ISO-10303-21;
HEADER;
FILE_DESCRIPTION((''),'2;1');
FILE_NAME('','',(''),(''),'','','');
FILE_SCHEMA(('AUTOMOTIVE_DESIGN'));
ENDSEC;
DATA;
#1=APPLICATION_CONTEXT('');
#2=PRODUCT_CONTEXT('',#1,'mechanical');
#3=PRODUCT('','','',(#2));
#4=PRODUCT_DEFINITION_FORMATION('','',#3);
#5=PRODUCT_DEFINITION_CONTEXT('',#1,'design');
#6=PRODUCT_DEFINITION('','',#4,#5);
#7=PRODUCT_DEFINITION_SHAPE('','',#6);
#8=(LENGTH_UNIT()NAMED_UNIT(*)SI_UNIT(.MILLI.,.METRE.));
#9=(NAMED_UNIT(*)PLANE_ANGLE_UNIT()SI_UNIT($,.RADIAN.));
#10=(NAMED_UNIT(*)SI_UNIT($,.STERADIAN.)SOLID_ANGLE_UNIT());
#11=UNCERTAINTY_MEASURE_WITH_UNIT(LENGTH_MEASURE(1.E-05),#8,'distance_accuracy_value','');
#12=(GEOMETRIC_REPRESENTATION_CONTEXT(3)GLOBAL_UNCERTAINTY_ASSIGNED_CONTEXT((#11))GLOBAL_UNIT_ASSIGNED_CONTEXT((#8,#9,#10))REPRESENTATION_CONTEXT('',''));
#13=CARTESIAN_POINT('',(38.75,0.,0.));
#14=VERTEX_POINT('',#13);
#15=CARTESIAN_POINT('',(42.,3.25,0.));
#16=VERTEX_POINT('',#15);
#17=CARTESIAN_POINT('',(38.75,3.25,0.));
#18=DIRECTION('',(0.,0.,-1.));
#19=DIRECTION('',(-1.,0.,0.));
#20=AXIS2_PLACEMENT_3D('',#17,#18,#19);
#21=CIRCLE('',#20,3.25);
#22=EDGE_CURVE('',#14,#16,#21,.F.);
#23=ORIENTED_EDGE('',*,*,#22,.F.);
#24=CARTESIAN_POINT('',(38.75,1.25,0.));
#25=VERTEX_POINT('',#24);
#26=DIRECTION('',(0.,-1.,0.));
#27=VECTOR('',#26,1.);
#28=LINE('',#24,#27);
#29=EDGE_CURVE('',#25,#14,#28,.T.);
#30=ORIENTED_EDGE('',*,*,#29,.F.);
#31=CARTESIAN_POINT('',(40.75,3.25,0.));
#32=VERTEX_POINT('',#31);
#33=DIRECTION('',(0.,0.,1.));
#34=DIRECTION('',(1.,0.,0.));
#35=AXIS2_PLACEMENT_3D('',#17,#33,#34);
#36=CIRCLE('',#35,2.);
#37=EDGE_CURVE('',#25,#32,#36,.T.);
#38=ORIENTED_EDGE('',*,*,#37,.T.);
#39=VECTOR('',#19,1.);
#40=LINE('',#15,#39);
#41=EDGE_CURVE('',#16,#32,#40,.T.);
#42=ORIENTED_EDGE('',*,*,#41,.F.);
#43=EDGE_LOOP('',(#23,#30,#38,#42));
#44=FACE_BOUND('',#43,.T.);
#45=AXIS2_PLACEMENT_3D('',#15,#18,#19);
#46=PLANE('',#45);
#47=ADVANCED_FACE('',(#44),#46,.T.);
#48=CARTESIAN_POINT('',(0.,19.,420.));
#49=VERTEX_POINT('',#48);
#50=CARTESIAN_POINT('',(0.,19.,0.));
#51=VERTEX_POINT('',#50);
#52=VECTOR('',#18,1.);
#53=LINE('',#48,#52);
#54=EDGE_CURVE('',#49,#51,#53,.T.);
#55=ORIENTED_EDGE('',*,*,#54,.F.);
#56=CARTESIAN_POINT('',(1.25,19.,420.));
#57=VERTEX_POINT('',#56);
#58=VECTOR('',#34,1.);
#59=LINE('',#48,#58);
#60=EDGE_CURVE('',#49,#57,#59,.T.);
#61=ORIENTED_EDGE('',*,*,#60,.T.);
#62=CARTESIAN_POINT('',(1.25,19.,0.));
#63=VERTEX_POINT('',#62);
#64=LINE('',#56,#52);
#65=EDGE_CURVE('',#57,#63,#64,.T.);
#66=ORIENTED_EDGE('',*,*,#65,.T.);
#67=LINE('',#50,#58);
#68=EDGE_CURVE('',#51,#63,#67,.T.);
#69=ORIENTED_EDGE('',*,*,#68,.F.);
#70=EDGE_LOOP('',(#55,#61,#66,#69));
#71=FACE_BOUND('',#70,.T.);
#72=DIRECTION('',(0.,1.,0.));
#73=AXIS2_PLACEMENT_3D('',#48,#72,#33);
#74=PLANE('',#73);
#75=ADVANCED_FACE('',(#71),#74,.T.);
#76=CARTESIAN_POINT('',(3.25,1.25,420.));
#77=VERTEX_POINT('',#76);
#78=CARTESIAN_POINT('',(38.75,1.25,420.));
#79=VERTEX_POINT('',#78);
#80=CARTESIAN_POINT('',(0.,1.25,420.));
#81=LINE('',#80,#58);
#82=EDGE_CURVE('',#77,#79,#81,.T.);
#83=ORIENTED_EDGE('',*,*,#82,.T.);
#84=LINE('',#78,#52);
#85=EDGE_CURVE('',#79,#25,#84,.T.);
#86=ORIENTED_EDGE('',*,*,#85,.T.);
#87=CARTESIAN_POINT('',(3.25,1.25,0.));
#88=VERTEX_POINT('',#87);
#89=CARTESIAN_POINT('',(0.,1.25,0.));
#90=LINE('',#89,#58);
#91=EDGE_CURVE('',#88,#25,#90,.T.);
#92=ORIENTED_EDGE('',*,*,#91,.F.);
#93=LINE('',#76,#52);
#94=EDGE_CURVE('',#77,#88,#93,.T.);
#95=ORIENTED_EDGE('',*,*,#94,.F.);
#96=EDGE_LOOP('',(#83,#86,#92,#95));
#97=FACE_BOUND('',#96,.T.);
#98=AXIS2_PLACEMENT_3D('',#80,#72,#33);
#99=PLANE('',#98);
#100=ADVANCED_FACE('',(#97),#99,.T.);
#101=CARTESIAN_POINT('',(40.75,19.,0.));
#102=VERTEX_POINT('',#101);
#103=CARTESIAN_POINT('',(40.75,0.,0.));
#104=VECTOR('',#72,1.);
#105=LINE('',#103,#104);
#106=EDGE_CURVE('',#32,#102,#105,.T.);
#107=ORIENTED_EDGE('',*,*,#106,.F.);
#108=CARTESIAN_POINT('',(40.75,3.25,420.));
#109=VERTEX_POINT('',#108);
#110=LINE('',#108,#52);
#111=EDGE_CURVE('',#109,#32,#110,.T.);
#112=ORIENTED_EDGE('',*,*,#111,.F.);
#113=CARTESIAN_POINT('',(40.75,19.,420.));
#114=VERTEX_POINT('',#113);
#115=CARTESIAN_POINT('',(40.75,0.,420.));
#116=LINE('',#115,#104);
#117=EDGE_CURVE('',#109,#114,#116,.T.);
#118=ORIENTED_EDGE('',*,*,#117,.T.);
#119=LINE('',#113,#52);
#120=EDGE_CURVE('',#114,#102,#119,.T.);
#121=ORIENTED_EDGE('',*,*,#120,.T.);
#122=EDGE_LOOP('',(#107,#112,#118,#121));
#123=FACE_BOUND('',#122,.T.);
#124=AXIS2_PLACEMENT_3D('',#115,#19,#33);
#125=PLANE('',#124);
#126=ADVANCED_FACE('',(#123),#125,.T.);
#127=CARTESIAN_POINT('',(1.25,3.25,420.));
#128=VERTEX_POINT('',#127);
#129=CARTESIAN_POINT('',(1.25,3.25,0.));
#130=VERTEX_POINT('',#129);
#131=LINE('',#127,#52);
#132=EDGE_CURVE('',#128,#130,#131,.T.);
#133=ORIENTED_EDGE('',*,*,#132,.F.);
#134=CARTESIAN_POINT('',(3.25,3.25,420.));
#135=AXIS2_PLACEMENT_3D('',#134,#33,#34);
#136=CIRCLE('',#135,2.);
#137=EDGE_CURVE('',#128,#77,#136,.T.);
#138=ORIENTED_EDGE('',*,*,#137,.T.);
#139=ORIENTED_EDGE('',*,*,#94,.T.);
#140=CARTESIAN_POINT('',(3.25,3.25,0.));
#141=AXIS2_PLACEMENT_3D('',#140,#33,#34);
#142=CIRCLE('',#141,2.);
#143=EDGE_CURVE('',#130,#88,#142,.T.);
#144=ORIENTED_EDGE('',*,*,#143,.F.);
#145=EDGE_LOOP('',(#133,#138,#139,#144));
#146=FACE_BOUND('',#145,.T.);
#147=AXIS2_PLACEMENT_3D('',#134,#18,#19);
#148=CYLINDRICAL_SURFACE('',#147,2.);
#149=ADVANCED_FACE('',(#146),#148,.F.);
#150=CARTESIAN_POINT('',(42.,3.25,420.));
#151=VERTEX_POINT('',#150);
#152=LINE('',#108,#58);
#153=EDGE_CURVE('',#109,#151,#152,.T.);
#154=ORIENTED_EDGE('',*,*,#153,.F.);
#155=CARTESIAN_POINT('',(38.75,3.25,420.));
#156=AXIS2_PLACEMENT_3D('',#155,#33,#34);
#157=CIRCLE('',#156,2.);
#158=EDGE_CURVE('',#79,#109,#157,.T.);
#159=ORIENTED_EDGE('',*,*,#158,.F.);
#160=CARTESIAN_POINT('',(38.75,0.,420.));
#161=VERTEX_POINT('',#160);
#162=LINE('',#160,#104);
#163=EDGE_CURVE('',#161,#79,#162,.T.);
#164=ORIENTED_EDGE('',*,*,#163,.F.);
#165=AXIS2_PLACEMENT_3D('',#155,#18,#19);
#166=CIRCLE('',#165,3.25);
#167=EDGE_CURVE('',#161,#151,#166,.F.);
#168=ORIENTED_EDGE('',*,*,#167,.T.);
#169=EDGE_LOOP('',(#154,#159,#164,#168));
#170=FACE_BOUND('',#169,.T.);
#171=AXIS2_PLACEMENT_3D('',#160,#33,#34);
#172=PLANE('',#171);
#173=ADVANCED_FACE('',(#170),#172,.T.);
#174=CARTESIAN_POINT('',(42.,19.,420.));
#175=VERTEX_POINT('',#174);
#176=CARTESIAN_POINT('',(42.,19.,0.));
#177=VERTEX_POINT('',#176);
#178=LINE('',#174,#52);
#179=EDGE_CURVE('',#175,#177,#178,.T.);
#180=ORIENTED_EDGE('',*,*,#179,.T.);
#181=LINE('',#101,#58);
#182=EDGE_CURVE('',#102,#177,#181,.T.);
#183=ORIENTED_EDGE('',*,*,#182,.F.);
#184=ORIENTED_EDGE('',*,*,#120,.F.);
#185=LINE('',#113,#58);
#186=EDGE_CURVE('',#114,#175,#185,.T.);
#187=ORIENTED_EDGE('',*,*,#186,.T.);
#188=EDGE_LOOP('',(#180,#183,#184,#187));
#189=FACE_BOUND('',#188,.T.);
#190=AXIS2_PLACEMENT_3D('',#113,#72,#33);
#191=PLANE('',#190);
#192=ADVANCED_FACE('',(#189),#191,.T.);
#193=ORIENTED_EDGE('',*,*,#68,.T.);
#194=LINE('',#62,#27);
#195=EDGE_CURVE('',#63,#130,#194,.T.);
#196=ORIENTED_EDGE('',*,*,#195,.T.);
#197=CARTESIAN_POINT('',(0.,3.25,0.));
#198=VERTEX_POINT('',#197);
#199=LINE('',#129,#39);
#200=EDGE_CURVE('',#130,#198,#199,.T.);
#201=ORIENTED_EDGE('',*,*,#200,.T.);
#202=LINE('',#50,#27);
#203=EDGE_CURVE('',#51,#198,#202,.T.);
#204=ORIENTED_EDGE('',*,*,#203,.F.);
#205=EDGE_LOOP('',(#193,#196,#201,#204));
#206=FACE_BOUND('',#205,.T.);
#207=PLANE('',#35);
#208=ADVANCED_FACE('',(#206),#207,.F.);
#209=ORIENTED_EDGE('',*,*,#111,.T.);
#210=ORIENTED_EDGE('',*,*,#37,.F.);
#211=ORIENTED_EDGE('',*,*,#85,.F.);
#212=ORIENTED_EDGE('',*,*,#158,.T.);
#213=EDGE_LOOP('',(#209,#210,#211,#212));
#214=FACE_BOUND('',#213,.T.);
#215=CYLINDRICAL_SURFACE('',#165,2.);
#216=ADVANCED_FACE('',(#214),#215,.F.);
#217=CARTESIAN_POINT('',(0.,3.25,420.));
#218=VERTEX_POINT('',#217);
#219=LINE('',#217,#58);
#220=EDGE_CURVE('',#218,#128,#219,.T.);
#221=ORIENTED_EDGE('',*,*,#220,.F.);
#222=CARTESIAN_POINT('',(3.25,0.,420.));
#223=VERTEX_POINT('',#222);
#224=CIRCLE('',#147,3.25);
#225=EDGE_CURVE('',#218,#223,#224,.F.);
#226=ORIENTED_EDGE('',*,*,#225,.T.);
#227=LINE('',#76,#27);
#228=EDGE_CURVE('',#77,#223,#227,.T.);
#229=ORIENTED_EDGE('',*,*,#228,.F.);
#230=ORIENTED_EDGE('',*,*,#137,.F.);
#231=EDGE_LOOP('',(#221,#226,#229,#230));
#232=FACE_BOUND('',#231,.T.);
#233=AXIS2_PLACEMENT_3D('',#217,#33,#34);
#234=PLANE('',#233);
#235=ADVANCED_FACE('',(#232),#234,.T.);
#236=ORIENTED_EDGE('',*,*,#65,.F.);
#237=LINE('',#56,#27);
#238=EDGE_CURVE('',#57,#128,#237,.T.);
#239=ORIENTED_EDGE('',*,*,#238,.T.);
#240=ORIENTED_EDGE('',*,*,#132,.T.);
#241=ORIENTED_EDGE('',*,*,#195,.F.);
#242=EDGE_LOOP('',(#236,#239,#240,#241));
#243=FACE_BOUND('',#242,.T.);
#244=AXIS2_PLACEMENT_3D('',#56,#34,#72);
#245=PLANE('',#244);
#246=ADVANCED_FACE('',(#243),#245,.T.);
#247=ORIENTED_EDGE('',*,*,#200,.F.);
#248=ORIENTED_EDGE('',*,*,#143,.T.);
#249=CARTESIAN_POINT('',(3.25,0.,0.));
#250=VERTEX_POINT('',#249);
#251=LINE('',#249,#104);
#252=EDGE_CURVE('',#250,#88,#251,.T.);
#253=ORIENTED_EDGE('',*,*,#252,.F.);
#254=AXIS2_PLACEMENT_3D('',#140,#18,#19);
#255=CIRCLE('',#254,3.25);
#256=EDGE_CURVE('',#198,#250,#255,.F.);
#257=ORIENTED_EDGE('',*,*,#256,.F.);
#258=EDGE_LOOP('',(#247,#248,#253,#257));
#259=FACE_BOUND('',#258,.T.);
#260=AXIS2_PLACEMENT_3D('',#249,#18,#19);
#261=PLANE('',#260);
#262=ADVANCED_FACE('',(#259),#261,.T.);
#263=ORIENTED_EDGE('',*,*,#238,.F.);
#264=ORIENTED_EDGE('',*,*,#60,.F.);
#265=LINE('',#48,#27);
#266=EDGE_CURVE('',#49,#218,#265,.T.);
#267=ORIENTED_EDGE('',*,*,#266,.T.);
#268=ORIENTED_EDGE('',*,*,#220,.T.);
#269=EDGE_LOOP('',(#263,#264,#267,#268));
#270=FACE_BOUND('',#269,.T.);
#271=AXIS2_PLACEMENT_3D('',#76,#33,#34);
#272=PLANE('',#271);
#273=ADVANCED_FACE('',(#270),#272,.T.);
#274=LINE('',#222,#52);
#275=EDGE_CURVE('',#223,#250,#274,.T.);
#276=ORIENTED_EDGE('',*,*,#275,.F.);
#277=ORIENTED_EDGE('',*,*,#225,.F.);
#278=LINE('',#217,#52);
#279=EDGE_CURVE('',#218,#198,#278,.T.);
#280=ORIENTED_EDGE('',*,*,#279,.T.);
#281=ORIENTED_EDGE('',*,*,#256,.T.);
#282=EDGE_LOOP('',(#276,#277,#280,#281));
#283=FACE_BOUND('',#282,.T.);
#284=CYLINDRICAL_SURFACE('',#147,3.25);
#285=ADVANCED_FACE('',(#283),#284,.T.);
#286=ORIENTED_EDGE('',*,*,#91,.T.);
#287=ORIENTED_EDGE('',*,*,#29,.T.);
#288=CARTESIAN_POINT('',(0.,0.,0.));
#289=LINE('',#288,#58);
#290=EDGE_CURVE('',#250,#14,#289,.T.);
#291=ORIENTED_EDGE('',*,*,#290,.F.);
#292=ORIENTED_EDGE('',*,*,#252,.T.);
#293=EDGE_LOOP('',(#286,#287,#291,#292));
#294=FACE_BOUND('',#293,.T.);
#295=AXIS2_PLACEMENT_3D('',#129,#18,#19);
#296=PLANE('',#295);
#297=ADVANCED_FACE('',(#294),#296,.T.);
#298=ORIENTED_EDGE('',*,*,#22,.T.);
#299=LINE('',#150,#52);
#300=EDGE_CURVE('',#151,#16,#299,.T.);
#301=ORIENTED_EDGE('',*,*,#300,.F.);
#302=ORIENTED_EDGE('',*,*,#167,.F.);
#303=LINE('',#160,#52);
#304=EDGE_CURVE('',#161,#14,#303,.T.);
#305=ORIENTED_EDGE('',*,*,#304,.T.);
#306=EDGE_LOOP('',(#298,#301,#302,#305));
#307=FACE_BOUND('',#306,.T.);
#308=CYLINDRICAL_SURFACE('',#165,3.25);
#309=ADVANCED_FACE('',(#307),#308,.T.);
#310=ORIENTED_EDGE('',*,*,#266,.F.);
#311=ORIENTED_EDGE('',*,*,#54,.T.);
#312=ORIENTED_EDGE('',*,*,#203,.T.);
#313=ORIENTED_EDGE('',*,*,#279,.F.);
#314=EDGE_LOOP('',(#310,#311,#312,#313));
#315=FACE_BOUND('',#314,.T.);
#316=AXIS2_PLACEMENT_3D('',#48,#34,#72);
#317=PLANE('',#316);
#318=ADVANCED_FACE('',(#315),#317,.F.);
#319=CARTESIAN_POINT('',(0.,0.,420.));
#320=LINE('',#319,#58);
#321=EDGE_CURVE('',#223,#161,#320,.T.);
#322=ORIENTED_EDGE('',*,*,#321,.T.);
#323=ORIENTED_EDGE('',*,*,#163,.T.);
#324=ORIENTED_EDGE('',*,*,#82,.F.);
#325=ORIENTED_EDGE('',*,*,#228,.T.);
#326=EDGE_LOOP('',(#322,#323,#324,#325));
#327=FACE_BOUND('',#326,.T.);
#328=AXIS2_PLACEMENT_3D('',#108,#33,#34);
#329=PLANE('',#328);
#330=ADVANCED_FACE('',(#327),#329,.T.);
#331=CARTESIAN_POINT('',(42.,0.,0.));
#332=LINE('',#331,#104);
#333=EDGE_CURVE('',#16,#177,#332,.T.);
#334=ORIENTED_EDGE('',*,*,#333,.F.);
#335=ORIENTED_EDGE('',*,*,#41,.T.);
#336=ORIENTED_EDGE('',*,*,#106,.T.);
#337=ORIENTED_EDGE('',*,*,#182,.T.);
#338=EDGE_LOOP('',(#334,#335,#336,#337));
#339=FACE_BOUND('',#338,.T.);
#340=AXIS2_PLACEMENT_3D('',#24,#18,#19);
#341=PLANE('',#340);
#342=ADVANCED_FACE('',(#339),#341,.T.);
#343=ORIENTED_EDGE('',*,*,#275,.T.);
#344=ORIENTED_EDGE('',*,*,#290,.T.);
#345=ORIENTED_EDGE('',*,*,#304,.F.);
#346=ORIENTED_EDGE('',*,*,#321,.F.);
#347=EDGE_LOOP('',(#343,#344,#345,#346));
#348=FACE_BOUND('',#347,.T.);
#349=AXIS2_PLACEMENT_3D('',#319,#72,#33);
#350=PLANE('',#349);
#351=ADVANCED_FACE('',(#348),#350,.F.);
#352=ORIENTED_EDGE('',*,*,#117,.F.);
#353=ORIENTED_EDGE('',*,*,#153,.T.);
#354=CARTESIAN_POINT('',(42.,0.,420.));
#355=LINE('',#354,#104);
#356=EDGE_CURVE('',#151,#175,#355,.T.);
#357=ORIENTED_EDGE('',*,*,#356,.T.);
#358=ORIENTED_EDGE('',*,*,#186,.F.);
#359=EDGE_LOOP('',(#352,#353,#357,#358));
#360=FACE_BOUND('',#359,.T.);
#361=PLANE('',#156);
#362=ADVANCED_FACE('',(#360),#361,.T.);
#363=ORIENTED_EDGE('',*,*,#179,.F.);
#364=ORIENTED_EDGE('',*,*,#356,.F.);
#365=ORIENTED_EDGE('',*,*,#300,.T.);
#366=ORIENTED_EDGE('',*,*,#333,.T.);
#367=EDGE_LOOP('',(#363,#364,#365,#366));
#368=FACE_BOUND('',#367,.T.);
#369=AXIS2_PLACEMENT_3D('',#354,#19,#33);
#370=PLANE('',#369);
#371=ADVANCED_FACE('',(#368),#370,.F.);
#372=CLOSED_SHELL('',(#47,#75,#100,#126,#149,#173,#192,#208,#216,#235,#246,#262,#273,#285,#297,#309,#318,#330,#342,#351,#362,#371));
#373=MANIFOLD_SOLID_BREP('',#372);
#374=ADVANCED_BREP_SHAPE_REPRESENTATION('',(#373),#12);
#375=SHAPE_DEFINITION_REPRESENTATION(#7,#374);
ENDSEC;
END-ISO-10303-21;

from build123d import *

# Parameters (mm, degrees)
BASE_FLANGE1_DEPTH = 420


# Sheet-metal steps are written as plain solids
with BuildPart() as part:
    # Sketch1 → Base-Flange1 (new body)
    with BuildSketch(Plane.XY):
        with BuildLine():
            Line((0, 19), (0, 3.25))
            ThreePointArc((0, 3.25), (0.951902961, 0.951902961), (3.25, 0))
            Line((3.25, 0), (38.75, 0))
            ThreePointArc((38.75, 0), (41.048097039, 0.951902961), (42, 3.25))
            Line((42, 3.25), (42, 19))
            Line((42, 19), (40.75, 19))
            Line((40.75, 19), (40.75, 3.25))
            ThreePointArc((40.75, 3.25), (40.164213562, 1.835786438), (38.75, 1.25))
            Line((38.75, 1.25), (3.25, 1.25))
            ThreePointArc((3.25, 1.25), (1.835786438, 1.835786438), (1.25, 3.25))
            Line((1.25, 3.25), (1.25, 19))
            Line((1.25, 19), (0, 19))
        make_face()
    extrude(amount=BASE_FLANGE1_DEPTH)


solid = part.part
